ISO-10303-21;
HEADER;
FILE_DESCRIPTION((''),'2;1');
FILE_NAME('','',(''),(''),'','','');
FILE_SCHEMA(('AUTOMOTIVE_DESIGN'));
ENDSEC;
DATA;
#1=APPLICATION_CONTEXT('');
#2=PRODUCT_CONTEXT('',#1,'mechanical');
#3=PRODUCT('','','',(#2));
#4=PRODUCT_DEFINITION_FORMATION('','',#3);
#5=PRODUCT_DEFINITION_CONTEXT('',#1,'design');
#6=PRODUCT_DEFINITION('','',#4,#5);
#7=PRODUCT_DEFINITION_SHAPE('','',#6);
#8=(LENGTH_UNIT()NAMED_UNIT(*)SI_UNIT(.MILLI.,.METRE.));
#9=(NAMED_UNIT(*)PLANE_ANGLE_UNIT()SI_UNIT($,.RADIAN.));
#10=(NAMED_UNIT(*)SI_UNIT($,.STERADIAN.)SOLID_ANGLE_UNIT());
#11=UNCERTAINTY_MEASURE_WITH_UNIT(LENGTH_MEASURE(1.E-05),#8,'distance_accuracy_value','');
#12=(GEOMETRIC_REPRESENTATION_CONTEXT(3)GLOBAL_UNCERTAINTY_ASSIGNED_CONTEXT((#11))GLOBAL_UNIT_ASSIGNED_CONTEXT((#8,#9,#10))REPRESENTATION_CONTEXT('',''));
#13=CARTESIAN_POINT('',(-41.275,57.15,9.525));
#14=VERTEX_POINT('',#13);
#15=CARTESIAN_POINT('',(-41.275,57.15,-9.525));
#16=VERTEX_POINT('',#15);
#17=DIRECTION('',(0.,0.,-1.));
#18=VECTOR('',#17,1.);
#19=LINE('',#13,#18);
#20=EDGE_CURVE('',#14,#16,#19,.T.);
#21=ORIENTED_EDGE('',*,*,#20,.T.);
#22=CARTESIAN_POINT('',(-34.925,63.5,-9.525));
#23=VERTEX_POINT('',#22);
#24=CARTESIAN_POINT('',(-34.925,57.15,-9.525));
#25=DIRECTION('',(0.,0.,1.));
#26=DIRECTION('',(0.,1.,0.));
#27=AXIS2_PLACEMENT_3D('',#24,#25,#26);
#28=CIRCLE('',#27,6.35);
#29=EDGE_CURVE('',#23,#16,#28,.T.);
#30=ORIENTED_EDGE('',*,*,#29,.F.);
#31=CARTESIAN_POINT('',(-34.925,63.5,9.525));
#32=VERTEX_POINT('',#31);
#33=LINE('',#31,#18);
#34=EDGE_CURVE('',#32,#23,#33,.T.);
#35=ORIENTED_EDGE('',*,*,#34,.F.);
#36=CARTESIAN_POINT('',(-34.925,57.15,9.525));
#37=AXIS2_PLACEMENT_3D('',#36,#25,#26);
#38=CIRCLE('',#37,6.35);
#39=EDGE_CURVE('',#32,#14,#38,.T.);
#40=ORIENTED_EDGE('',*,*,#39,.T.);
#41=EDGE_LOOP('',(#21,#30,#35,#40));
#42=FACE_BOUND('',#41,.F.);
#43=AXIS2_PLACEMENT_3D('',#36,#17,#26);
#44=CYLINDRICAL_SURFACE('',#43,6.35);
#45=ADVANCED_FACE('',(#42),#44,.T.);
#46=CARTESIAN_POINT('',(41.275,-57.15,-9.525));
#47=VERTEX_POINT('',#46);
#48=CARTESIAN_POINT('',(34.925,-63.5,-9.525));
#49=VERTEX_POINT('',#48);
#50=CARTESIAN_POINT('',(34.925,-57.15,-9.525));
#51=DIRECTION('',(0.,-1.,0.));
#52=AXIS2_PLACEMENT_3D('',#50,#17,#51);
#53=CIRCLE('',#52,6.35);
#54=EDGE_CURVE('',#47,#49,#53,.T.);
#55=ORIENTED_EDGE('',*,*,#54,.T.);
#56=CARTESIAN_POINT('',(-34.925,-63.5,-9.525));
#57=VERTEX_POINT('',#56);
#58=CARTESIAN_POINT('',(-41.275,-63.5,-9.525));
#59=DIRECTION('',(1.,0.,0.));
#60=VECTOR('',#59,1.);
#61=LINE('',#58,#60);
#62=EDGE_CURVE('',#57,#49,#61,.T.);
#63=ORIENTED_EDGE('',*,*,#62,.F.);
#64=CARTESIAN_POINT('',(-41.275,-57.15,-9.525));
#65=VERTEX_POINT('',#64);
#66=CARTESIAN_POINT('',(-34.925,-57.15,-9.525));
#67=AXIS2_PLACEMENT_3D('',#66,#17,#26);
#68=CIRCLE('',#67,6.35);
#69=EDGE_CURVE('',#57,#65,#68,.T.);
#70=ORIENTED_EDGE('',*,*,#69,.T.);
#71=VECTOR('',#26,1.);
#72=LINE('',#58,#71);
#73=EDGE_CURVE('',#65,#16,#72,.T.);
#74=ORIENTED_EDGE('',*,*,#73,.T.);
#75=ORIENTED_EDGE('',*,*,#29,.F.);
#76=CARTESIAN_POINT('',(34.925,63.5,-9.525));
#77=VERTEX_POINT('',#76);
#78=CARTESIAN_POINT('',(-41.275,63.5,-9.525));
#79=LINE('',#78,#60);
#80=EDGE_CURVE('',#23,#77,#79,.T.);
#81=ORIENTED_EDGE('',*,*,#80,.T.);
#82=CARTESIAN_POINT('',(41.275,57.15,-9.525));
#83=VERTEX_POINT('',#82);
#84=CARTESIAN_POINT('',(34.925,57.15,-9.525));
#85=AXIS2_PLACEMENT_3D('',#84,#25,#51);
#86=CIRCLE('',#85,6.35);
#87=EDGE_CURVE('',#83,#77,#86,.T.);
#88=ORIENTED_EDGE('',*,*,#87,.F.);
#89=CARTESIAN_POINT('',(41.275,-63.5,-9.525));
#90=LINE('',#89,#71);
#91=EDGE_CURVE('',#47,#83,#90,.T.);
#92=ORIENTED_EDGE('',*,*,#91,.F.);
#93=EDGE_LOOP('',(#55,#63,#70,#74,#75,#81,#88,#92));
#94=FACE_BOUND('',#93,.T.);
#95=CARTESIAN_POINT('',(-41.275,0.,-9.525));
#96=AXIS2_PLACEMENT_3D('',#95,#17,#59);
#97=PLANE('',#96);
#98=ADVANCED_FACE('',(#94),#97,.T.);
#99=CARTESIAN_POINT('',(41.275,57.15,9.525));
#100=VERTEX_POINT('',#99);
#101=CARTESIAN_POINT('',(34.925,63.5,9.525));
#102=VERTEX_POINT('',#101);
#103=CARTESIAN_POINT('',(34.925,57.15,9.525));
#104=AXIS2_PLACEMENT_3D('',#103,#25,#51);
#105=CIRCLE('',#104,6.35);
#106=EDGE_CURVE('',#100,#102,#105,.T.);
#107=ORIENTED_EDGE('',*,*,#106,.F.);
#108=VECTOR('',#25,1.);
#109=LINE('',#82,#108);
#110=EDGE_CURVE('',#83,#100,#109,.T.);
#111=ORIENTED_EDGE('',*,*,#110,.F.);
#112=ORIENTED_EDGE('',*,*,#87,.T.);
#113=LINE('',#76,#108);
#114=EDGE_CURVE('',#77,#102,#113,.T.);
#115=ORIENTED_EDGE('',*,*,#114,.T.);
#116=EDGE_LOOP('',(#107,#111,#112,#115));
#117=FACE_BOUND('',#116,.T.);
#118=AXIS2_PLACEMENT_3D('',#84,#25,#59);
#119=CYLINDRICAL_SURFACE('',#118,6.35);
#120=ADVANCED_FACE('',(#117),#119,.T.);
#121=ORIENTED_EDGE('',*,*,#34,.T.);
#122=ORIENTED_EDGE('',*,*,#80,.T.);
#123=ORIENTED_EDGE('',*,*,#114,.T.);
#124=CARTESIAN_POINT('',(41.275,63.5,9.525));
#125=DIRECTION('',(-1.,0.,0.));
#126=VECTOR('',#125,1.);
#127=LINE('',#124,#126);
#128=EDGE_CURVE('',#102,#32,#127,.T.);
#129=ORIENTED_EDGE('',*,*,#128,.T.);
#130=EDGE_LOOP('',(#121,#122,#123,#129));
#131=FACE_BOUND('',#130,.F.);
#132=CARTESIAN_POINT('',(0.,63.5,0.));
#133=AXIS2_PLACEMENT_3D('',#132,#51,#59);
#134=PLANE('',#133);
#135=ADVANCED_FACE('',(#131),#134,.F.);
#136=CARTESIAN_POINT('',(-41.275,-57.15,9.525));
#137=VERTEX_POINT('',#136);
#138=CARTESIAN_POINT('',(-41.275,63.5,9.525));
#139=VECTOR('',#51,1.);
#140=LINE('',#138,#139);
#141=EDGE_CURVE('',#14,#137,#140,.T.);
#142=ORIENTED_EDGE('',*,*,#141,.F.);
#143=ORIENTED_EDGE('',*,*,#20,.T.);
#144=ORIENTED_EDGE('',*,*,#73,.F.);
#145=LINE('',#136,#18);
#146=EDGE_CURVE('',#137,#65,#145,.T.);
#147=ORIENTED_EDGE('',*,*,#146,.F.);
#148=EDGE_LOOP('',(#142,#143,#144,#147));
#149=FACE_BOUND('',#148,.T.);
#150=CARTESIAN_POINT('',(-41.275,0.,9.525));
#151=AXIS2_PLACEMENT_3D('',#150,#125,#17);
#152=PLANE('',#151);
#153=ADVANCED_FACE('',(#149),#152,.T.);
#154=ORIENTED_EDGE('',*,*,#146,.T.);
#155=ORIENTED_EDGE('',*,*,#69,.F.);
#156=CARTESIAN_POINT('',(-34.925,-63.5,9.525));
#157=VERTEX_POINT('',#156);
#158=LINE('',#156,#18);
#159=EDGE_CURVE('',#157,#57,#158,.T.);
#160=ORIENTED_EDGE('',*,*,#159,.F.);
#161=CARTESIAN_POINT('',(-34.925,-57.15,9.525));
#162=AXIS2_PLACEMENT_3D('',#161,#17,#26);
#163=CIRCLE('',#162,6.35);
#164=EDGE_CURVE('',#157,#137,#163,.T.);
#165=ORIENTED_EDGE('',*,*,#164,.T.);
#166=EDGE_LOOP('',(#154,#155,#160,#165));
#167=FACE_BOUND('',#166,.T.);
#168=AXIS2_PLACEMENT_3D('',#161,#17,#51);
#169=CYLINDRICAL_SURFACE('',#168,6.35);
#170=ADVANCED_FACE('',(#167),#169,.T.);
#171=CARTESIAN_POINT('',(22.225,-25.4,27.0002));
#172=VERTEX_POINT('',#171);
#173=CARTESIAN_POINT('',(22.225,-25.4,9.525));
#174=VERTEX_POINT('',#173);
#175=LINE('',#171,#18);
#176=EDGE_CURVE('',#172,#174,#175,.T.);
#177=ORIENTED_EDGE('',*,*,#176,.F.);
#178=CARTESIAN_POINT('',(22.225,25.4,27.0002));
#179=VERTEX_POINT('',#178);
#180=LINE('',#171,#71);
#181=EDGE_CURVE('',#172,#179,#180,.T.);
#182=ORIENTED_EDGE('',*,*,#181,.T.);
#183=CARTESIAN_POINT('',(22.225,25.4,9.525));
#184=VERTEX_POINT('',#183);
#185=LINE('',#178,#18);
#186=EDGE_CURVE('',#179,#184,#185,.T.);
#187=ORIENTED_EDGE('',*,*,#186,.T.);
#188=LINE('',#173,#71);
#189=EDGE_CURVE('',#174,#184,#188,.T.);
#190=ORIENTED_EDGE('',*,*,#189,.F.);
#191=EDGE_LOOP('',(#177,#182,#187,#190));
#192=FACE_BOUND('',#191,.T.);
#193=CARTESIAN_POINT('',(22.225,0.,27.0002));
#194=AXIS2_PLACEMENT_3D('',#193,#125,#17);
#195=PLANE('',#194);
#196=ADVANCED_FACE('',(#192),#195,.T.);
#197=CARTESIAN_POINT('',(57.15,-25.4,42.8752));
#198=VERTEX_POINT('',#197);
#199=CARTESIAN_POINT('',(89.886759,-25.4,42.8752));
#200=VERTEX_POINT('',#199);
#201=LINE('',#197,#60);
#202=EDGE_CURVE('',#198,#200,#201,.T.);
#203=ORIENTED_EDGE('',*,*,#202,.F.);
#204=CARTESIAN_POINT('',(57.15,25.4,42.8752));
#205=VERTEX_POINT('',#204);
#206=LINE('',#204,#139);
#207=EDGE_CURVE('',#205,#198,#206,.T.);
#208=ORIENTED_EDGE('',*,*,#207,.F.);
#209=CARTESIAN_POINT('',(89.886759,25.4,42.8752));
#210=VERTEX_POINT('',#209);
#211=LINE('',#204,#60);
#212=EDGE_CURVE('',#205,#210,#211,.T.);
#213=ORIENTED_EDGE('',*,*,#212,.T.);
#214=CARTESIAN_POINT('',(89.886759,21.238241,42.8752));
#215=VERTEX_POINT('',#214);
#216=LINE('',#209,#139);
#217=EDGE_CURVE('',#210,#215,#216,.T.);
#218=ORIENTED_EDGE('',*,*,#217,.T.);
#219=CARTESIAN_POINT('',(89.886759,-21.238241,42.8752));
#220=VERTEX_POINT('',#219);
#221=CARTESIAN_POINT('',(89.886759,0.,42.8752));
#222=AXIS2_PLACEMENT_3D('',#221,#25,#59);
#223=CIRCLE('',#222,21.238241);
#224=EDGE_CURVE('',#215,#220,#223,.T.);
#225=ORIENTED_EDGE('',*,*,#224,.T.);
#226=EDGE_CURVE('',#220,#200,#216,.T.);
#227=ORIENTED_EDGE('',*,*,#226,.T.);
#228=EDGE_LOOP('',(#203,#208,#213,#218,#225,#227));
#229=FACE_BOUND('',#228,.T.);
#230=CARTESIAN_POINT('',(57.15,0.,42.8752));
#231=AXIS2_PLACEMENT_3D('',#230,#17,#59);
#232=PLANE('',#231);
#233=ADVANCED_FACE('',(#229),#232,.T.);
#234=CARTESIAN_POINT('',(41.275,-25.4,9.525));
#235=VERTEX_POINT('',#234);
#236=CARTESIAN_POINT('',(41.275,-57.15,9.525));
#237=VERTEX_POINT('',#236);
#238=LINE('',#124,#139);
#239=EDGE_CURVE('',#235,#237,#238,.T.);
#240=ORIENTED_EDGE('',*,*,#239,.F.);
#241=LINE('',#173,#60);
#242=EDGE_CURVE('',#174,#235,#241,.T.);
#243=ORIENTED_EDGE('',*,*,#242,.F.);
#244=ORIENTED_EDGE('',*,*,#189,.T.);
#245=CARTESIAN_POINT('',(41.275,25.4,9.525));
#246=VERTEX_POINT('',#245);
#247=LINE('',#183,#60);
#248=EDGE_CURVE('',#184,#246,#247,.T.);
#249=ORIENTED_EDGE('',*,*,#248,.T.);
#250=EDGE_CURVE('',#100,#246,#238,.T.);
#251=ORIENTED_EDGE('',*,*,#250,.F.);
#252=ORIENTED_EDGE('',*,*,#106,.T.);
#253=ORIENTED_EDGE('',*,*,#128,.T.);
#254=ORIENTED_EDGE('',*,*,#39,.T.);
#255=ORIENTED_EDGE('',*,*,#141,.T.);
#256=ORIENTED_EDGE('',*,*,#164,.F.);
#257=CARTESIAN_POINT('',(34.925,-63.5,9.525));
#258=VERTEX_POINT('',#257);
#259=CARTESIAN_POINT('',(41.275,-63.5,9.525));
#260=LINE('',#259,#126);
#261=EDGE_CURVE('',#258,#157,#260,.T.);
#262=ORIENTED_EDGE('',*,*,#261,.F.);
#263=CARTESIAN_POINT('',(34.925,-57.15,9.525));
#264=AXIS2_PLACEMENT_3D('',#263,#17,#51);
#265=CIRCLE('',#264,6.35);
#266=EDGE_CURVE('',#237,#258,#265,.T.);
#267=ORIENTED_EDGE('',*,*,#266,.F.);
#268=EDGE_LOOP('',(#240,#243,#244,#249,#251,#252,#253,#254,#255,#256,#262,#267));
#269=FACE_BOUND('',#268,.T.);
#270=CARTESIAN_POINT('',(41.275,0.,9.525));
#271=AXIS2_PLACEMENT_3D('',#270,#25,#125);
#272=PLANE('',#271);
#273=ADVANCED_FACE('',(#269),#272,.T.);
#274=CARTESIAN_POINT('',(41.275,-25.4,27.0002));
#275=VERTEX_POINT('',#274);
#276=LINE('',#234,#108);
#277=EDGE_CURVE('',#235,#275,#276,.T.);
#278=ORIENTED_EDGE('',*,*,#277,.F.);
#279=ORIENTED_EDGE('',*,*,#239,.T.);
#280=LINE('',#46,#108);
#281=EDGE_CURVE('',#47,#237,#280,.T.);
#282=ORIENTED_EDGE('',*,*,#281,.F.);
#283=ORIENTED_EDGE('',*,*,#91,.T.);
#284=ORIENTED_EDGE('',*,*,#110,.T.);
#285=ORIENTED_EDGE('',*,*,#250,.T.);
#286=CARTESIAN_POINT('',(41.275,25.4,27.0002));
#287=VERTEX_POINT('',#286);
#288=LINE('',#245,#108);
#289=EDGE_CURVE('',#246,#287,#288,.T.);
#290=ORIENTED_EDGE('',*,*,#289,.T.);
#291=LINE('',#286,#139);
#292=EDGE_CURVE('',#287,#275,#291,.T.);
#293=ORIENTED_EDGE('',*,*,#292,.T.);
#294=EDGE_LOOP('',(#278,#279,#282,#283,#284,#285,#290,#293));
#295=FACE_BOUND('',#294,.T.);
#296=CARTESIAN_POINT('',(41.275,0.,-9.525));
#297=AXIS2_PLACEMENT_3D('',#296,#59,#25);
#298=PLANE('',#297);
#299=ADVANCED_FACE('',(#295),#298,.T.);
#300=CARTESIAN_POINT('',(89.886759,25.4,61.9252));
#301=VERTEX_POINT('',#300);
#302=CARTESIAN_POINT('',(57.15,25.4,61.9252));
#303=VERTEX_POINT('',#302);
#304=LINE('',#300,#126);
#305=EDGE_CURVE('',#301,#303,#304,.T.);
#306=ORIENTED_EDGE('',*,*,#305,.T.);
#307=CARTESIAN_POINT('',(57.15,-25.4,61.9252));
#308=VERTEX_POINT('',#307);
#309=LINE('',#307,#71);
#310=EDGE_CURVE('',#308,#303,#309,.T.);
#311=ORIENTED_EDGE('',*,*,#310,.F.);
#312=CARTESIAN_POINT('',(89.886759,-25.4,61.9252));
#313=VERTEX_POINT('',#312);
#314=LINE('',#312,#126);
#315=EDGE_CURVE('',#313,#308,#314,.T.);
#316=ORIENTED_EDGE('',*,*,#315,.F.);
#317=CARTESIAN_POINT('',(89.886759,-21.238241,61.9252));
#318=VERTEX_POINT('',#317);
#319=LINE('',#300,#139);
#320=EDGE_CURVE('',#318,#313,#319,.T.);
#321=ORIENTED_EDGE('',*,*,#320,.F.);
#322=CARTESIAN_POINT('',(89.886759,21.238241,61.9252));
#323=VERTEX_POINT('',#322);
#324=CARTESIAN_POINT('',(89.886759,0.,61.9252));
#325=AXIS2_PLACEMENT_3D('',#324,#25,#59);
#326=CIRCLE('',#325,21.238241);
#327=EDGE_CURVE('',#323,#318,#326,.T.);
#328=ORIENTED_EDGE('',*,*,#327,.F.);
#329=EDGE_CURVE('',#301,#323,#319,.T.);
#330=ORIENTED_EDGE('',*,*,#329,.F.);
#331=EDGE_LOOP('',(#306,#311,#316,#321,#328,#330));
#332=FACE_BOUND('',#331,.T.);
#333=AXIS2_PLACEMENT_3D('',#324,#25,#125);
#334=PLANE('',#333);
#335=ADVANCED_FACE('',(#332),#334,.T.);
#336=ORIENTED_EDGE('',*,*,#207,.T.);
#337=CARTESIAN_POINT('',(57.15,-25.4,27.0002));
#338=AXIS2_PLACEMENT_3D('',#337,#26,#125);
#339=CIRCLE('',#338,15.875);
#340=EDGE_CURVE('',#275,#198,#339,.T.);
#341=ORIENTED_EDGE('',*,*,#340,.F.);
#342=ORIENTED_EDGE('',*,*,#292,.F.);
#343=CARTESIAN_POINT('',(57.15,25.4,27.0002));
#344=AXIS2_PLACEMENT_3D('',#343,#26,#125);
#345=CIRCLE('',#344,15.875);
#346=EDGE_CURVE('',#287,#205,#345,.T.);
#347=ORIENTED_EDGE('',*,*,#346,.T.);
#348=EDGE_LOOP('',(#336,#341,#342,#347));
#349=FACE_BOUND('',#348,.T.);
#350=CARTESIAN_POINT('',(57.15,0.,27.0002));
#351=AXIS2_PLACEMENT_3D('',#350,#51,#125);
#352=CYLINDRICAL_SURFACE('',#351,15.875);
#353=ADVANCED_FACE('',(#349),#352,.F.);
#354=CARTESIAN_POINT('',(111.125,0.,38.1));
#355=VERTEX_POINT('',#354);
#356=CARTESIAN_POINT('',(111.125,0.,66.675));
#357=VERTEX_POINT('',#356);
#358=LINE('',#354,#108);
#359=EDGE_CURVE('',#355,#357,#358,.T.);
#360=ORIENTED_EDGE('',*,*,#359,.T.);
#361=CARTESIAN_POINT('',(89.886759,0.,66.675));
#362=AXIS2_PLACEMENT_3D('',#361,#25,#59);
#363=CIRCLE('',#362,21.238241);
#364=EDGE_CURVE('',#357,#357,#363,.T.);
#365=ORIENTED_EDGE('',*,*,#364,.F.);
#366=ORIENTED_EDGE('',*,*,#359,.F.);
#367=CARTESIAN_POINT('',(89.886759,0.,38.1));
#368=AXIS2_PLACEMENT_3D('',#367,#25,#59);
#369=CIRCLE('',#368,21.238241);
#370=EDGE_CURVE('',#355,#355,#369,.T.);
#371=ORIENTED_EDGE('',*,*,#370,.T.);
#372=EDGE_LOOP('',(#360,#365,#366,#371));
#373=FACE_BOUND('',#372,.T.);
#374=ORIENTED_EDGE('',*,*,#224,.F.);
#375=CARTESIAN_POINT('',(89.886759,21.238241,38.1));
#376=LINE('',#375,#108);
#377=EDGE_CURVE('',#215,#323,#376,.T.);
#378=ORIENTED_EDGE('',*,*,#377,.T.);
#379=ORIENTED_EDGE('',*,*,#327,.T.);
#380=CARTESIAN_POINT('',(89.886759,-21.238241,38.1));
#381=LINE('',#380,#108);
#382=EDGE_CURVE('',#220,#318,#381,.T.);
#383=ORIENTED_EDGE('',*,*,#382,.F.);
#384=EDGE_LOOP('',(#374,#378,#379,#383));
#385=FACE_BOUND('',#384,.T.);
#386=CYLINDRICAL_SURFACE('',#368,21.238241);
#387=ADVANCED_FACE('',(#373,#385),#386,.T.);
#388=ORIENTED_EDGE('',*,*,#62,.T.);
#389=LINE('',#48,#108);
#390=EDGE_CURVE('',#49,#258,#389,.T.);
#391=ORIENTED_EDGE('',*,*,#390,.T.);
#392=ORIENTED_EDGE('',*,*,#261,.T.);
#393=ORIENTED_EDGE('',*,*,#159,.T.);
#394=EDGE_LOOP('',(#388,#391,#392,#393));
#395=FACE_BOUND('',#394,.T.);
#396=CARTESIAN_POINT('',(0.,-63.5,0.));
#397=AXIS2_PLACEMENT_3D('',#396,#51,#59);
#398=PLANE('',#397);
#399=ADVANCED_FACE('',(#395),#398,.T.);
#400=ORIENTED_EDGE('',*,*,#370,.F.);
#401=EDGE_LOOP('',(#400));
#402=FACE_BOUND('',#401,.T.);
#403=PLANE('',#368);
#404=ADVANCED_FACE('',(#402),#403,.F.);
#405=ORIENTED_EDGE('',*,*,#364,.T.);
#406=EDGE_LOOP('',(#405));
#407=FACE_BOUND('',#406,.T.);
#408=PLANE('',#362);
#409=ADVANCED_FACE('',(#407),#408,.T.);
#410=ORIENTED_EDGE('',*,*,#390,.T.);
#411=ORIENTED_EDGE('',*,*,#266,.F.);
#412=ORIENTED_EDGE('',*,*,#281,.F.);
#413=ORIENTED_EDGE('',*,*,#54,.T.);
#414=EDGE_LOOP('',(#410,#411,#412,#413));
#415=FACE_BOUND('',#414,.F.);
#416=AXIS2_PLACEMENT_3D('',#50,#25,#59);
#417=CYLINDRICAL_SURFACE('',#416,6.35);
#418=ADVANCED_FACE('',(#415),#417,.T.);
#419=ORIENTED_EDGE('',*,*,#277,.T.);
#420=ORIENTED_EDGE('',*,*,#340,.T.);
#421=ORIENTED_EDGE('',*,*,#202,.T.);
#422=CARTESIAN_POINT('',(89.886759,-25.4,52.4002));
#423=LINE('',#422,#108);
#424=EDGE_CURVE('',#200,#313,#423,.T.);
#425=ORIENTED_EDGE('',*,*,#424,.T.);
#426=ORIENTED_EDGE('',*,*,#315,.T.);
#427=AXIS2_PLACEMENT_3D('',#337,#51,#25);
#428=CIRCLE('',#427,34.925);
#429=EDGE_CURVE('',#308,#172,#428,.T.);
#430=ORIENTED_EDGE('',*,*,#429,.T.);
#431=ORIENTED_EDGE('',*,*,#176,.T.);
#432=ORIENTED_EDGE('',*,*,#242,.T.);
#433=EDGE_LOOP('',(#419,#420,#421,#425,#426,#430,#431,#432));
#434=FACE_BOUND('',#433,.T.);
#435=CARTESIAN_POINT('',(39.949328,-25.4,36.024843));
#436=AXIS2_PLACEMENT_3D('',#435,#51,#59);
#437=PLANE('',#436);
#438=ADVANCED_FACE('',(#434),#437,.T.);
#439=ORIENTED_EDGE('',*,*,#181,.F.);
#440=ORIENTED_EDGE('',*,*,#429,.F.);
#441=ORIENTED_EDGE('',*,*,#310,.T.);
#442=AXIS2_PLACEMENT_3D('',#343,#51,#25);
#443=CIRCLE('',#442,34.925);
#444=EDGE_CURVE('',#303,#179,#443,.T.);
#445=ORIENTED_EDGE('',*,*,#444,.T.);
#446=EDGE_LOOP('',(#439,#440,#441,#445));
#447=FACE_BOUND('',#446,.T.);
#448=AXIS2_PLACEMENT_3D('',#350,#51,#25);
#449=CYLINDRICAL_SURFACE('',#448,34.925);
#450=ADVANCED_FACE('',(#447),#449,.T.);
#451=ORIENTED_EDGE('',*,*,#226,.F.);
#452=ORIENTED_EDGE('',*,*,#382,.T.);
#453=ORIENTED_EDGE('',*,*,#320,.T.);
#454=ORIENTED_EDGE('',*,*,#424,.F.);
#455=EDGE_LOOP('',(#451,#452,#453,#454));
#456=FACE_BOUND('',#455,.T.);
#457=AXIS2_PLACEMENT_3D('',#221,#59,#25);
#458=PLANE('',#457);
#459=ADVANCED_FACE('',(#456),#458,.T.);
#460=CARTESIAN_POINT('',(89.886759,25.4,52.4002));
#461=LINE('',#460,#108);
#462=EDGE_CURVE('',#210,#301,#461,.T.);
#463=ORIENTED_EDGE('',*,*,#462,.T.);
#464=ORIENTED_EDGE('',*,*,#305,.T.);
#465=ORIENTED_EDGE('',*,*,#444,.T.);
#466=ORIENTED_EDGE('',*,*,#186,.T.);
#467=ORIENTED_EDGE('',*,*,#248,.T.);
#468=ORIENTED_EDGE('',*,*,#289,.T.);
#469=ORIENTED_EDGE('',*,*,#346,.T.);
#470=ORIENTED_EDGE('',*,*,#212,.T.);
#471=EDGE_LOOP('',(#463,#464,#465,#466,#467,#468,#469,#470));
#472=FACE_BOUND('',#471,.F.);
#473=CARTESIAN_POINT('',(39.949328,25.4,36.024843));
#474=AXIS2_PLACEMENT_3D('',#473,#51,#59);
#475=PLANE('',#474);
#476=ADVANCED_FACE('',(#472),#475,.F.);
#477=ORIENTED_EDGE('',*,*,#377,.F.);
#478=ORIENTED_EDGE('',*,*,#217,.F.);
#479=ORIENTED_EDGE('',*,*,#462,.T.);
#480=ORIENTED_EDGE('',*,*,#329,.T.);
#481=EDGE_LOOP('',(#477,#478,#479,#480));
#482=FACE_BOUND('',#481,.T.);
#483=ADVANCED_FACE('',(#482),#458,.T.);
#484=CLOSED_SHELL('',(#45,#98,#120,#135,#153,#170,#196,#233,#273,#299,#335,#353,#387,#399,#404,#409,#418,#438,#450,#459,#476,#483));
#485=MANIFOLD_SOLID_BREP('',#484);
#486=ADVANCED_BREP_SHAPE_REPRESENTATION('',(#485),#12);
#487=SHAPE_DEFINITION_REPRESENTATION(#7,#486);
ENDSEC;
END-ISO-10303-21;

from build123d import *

# Parameters (mm, degrees)
F1_DEPTH = 63.5
F0_W     = 29.5617593795
F0_H     = 19.05
F2_DEPTH = 25.4
F5_R     = 6.35


# Not quite as in the source:
# - a feature of the source that left no trace in its solid (it failed there, or was rolled back) is left out


with BuildPart() as f1:
    # F0 (on Front) → F1 (new body, symmetric)
    with BuildSketch(Plane.XZ):
        Polygon((41.275, -9.525), (41.275, 9.525), (22.225, 9.525), (-41.275, 9.525), (-41.275, -9.525), align=None)
    extrude(amount=F1_DEPTH, both=True)

    # F0 (on Front) → F2 (join, symmetric)
    with BuildSketch(Plane.XZ):
        with BuildLine():
            Line((22.225, 9.525), (41.275, 9.525))
            Line((41.275, 9.525), (41.275, 27.0002))
            ThreePointArc((41.275, 27.0002), (45.9246798487, 38.2255201513), (57.15, 42.8752))
            Line((57.15, 42.8752), (60.325, 42.8752))
            Line((60.325, 42.8752), (60.325, 61.9252))
            Line((60.325, 61.9252), (57.15, 61.9252))
            ThreePointArc((57.15, 61.9252), (32.4542956671, 51.6959043329), (22.225, 27.0002))
            Line((22.225, 27.0002), (22.225, 9.525))
        make_face()
        with Locations((75.1058796897, 52.4002)):
            Rectangle(F0_W, F0_H)
    extrude(amount=F2_DEPTH, both=True)

    # F0 (on Front) → F4 (revolve)
    with BuildSketch(Plane.XZ):
        Polygon((89.8867593795, 61.9252), (89.8867593795, 42.8752), (89.8867593795, 38.1), (111.125, 38.1), (111.125, 66.675), (89.8867593795, 66.675), align=None)
    revolve(axis=Axis((89.8867593795, 0, 52.3875), (0, 0, 1)))

    # F5
    f5_edges = [f1.edges().sort_by_distance(p)[0] for p in [
        (41.275, -63.5, 0),
        (-41.275, -63.5, 0),
        (41.275, 63.5, 0),
        (-41.275, 63.5, 0),
    ]]
    fillet(f5_edges, radius=F5_R)


solid = f1.part
